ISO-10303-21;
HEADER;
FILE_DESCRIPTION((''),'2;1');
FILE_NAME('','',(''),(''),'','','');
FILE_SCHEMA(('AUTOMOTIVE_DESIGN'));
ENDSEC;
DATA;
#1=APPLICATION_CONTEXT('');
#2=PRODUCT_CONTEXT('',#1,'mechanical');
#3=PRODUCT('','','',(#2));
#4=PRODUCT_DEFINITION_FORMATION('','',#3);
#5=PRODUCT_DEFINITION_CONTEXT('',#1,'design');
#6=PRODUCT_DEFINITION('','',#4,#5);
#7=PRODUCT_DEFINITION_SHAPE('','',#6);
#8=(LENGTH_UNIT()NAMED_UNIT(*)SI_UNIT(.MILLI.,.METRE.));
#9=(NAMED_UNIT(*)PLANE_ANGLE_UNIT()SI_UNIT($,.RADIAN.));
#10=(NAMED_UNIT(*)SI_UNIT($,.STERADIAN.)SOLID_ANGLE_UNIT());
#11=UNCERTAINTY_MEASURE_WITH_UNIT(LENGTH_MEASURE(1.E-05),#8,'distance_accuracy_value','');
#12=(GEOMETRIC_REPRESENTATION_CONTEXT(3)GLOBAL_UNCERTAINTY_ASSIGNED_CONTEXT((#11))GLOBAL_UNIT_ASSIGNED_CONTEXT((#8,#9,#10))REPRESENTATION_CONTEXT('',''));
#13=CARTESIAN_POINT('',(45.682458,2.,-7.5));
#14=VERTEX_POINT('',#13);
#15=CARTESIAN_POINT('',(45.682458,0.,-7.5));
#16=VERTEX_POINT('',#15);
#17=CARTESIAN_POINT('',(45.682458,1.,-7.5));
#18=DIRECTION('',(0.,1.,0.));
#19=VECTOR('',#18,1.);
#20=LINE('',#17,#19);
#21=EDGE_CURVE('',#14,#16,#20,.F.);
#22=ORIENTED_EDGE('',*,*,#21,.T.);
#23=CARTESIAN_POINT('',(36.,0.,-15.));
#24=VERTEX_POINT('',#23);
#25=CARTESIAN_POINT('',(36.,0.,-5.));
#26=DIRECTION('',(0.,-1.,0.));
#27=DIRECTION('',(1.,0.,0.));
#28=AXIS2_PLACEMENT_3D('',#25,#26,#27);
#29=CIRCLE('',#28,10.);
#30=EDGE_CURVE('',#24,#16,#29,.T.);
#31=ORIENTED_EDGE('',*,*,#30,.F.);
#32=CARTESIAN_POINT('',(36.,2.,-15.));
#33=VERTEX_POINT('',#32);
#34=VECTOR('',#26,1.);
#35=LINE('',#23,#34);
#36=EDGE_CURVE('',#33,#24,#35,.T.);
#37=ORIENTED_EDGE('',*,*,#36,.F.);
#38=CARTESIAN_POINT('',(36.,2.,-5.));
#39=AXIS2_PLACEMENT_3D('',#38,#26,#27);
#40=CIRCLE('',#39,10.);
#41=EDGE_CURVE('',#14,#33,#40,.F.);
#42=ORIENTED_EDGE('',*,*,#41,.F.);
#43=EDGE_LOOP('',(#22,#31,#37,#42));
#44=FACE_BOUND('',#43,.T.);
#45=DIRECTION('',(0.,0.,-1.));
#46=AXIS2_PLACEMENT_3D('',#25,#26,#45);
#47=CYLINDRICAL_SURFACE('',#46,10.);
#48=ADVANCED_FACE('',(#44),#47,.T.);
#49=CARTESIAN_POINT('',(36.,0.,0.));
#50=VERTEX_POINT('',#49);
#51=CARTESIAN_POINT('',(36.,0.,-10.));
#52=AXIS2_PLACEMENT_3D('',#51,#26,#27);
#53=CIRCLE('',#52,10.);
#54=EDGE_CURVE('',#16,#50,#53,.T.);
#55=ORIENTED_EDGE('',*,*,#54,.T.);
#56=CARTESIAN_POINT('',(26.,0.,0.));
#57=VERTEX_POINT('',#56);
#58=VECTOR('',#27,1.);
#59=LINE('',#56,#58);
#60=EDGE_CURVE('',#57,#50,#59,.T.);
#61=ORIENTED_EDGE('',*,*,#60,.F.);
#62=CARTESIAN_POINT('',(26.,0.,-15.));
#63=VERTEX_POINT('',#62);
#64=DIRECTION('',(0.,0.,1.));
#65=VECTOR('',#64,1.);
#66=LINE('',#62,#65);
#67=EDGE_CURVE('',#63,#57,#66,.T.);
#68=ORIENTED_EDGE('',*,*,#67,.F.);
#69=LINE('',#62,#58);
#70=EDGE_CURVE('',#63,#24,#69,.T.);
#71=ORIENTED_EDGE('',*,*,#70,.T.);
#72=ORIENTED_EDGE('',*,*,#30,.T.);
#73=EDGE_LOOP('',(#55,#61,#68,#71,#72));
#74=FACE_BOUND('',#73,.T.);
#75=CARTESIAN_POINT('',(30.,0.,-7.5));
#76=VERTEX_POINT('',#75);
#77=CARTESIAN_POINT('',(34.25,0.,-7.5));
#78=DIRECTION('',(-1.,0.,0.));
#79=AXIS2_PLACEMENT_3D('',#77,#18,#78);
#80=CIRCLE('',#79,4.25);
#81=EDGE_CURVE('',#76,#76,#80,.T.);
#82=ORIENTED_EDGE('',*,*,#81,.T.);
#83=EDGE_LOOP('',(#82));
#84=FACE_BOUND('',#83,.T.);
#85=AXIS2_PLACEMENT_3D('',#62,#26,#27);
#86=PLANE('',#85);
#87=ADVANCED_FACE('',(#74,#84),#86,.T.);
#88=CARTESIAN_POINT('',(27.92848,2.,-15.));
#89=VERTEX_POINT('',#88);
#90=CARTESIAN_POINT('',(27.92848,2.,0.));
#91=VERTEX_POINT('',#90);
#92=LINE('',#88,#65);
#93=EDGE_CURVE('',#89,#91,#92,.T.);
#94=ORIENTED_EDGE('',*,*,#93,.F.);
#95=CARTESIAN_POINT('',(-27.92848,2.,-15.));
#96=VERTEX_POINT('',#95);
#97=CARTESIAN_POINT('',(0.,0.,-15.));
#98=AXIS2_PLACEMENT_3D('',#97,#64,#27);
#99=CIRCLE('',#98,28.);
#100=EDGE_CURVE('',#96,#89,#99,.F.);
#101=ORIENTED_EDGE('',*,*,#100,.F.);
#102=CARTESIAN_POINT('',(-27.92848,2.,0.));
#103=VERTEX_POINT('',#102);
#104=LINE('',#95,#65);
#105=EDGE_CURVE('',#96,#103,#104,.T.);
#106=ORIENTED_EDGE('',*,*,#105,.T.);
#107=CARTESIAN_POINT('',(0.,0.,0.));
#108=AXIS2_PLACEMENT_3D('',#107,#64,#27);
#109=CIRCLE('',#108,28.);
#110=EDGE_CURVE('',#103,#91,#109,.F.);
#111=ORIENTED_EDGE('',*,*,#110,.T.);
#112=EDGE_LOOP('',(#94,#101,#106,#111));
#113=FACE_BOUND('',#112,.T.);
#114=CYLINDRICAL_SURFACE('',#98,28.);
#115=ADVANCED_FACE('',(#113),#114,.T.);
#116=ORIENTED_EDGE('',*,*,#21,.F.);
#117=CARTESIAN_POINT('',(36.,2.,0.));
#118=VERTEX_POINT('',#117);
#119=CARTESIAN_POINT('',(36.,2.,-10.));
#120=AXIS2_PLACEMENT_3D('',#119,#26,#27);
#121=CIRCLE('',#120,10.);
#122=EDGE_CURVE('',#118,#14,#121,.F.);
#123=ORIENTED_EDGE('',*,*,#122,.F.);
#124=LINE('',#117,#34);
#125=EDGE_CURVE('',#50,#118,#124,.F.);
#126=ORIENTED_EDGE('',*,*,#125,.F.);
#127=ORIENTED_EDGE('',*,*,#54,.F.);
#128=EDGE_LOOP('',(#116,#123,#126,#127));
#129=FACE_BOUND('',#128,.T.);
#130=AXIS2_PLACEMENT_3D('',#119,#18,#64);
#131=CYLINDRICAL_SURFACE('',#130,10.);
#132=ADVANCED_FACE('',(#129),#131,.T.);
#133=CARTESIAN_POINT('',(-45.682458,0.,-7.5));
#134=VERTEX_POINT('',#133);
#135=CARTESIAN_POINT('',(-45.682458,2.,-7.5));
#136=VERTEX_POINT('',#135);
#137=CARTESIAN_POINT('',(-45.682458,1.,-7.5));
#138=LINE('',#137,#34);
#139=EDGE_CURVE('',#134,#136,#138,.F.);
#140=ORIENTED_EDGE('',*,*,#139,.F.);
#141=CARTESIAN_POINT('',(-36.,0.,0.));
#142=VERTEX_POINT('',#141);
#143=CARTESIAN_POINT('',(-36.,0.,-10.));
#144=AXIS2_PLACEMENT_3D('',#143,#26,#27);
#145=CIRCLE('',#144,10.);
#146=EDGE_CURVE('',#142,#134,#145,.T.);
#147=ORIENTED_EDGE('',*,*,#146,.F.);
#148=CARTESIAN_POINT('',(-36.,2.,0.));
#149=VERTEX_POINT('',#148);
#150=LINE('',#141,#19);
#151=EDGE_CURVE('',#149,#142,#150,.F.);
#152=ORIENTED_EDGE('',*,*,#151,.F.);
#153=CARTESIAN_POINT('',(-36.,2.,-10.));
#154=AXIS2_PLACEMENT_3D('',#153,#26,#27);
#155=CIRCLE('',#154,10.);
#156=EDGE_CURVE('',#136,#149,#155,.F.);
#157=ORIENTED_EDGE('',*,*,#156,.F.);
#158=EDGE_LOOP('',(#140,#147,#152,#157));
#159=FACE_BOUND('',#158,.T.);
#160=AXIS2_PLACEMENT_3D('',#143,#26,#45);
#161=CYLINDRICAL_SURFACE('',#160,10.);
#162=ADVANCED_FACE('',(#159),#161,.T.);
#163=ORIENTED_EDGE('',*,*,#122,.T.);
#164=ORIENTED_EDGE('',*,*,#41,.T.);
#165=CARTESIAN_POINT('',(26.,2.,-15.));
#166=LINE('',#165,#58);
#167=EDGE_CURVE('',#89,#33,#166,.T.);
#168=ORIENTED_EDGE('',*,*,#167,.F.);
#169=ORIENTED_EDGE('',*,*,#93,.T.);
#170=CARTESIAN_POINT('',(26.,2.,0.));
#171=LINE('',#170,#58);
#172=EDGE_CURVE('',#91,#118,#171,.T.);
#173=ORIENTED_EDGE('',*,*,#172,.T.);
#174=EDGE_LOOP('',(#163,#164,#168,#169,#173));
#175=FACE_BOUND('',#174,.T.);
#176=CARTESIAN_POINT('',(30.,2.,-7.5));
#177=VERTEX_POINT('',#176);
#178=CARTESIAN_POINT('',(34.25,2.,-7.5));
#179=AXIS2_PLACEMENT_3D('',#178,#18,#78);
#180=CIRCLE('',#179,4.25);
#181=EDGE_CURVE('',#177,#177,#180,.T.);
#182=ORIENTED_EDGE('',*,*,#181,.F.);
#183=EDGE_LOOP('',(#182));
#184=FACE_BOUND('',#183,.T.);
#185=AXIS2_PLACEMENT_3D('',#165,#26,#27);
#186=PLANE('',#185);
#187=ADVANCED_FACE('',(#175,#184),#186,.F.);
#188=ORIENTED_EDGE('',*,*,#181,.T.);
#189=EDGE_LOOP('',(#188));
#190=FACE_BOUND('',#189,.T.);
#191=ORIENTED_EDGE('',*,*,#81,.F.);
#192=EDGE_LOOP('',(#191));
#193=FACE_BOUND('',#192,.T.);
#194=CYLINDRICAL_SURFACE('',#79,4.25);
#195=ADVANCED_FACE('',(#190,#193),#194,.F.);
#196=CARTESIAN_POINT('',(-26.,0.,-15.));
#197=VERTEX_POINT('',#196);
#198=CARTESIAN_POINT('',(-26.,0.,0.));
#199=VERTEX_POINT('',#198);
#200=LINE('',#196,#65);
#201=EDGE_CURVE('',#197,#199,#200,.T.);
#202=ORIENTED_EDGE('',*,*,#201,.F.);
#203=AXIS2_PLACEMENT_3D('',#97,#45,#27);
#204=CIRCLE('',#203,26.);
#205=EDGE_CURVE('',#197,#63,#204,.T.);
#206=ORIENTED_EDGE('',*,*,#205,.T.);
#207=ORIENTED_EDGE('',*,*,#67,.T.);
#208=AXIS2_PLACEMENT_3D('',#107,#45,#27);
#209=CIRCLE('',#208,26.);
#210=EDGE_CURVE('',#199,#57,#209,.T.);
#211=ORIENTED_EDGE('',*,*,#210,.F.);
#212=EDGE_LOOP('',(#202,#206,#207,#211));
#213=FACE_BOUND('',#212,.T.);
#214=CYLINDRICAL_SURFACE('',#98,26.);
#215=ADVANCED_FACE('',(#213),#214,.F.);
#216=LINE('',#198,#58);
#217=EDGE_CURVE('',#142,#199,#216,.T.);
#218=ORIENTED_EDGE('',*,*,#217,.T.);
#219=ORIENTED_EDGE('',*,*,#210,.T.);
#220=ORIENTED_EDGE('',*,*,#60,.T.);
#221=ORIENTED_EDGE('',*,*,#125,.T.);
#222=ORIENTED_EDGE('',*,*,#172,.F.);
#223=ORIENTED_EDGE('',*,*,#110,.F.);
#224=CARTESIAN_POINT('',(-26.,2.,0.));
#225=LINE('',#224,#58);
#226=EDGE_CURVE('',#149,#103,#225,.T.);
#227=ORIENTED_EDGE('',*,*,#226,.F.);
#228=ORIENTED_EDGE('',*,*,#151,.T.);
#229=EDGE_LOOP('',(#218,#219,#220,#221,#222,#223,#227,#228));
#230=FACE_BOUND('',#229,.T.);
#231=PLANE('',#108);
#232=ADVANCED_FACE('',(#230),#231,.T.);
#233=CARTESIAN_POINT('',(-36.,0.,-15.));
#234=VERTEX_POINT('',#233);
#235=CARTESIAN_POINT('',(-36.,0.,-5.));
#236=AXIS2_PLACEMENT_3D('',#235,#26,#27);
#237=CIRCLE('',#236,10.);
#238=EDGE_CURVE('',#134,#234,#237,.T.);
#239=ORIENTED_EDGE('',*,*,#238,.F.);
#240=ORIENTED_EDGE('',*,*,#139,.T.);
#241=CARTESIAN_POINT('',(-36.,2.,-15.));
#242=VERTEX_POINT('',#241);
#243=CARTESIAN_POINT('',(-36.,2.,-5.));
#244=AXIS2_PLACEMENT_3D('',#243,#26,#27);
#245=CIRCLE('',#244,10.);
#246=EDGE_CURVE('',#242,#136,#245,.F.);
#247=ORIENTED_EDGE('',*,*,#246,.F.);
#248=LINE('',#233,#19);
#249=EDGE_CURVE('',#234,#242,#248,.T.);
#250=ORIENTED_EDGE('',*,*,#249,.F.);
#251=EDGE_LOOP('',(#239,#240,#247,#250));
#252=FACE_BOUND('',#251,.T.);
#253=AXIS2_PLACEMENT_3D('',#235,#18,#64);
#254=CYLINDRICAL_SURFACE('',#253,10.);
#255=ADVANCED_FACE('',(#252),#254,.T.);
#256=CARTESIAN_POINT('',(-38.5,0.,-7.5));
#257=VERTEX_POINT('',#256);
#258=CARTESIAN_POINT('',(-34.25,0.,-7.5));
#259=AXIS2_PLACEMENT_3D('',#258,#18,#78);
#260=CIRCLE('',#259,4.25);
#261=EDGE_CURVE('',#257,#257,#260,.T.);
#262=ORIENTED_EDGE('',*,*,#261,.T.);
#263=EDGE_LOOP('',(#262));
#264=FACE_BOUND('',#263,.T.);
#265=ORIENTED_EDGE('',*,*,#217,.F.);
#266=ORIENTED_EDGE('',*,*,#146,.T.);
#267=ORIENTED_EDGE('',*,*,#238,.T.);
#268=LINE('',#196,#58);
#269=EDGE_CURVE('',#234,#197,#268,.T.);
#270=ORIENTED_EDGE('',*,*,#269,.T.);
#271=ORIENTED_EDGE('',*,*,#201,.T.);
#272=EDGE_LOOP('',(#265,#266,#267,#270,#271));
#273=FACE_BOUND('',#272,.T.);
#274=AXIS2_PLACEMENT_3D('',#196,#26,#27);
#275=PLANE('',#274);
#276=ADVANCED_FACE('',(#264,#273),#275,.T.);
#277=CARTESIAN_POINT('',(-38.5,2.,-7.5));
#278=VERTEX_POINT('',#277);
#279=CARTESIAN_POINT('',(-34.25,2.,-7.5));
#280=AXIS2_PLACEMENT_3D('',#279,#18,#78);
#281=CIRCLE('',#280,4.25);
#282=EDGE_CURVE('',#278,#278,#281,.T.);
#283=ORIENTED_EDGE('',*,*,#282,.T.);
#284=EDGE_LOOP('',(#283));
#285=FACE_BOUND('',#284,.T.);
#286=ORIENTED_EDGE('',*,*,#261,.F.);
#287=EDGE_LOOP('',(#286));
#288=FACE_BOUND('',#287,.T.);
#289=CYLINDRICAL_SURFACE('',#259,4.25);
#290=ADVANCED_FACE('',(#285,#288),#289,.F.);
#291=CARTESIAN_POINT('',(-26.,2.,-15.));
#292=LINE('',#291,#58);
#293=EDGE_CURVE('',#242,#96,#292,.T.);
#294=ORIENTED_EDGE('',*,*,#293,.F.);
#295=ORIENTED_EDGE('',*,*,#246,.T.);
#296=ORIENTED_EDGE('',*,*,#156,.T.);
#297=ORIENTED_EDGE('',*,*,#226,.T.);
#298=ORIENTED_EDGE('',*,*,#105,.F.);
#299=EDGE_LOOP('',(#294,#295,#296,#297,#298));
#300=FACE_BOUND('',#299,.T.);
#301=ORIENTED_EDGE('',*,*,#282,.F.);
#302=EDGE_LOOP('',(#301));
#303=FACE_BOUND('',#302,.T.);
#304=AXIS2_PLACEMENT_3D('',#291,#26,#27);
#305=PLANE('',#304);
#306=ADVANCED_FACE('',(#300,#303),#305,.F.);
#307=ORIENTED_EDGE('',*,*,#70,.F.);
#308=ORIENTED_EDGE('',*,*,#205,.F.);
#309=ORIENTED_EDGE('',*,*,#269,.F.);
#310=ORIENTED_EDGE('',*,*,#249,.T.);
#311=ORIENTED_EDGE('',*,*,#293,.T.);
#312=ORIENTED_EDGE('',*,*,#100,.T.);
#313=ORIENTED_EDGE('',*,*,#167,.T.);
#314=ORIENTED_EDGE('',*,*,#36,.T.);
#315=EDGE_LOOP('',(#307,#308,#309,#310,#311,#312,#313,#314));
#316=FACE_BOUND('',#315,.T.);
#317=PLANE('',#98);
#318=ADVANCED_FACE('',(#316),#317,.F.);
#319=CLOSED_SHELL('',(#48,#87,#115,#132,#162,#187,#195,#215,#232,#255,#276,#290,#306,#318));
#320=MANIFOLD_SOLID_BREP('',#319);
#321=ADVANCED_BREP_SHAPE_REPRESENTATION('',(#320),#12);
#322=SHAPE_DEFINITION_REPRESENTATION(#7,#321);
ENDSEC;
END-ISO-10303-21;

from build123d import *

# Parameters (mm, degrees)
EXTRUDE_THIN2_DEPTH = 15
SKETCH6_R           = 4.25
CUT_EXTRUDE1_DEPTH  = 55.927224579
FILLET1_R           = 10


with BuildPart() as part:
    # Sketch1 → Extrude-Thin2 (new body)
    with BuildSketch(Plane.XY):
        with BuildLine():
            Line((46, 0), (26, 0))
            ThreePointArc((26, 0), (0, 26), (-26, 0))
            Line((-26, 0), (-46, 0))
            Line((-46, 0), (-46, 2))
            Line((-46, 2), (-27.928480088, 2))
            ThreePointArc((-27.928480088, 2), (0, 28), (27.928480088, 2))
            Line((27.928480088, 2), (46, 2))
            Line((46, 2), (46, 0))
        make_face()
    extrude(amount=-EXTRUDE_THIN2_DEPTH)

    # Sketch6 → Cut-Extrude1 (cut, through all)
    with BuildSketch(Plane(origin=(0, 2, 0), x_dir=(1, 0, 0), z_dir=(0, 1, 0))):
        with Locations(Location((-34.25, 7.5, 0), (0, 0, 180))):
            Circle(SKETCH6_R)
        with Locations(Location((34.25, 7.5, 0), (0, 0, 180))):
            Circle(SKETCH6_R)
    extrude(amount=-CUT_EXTRUDE1_DEPTH, mode=Mode.SUBTRACT)

    # Fillet1
    # the kernel refuses this fillet: 10 mm, written as the material it takes off along each edge
    with BuildSketch(Plane(origin=(-46, -25, -15), x_dir=(1, 0, 0), z_dir=(0, 1, 0)), Plane(origin=(46, 27, -15), x_dir=(-1, 0, 0), z_dir=(0, -1, 0))) as fillet1_piece_1:
        with BuildLine():
            CenterArc((FILLET1_R, -FILLET1_R), FILLET1_R, 90, 90)
            Line((0, -FILLET1_R), (0, 0))
            Line((0, 0), (FILLET1_R, 0))
        make_face()
    extrude(amount=52, mode=Mode.SUBTRACT)
    with BuildSketch(Plane(origin=(-46, -25, 0), x_dir=(1, 0, 0), z_dir=(0, 1, 0)), Plane(origin=(46, 27, 0), x_dir=(-1, 0, 0), z_dir=(0, -1, 0))) as fillet1_piece_2:
        with BuildLine():
            CenterArc((FILLET1_R, FILLET1_R), FILLET1_R, 180, 90)
            Line((0, FILLET1_R), (0, 0))
            Line((0, 0), (FILLET1_R, 0))
        make_face()
    extrude(amount=52, mode=Mode.SUBTRACT)


solid = part.part
